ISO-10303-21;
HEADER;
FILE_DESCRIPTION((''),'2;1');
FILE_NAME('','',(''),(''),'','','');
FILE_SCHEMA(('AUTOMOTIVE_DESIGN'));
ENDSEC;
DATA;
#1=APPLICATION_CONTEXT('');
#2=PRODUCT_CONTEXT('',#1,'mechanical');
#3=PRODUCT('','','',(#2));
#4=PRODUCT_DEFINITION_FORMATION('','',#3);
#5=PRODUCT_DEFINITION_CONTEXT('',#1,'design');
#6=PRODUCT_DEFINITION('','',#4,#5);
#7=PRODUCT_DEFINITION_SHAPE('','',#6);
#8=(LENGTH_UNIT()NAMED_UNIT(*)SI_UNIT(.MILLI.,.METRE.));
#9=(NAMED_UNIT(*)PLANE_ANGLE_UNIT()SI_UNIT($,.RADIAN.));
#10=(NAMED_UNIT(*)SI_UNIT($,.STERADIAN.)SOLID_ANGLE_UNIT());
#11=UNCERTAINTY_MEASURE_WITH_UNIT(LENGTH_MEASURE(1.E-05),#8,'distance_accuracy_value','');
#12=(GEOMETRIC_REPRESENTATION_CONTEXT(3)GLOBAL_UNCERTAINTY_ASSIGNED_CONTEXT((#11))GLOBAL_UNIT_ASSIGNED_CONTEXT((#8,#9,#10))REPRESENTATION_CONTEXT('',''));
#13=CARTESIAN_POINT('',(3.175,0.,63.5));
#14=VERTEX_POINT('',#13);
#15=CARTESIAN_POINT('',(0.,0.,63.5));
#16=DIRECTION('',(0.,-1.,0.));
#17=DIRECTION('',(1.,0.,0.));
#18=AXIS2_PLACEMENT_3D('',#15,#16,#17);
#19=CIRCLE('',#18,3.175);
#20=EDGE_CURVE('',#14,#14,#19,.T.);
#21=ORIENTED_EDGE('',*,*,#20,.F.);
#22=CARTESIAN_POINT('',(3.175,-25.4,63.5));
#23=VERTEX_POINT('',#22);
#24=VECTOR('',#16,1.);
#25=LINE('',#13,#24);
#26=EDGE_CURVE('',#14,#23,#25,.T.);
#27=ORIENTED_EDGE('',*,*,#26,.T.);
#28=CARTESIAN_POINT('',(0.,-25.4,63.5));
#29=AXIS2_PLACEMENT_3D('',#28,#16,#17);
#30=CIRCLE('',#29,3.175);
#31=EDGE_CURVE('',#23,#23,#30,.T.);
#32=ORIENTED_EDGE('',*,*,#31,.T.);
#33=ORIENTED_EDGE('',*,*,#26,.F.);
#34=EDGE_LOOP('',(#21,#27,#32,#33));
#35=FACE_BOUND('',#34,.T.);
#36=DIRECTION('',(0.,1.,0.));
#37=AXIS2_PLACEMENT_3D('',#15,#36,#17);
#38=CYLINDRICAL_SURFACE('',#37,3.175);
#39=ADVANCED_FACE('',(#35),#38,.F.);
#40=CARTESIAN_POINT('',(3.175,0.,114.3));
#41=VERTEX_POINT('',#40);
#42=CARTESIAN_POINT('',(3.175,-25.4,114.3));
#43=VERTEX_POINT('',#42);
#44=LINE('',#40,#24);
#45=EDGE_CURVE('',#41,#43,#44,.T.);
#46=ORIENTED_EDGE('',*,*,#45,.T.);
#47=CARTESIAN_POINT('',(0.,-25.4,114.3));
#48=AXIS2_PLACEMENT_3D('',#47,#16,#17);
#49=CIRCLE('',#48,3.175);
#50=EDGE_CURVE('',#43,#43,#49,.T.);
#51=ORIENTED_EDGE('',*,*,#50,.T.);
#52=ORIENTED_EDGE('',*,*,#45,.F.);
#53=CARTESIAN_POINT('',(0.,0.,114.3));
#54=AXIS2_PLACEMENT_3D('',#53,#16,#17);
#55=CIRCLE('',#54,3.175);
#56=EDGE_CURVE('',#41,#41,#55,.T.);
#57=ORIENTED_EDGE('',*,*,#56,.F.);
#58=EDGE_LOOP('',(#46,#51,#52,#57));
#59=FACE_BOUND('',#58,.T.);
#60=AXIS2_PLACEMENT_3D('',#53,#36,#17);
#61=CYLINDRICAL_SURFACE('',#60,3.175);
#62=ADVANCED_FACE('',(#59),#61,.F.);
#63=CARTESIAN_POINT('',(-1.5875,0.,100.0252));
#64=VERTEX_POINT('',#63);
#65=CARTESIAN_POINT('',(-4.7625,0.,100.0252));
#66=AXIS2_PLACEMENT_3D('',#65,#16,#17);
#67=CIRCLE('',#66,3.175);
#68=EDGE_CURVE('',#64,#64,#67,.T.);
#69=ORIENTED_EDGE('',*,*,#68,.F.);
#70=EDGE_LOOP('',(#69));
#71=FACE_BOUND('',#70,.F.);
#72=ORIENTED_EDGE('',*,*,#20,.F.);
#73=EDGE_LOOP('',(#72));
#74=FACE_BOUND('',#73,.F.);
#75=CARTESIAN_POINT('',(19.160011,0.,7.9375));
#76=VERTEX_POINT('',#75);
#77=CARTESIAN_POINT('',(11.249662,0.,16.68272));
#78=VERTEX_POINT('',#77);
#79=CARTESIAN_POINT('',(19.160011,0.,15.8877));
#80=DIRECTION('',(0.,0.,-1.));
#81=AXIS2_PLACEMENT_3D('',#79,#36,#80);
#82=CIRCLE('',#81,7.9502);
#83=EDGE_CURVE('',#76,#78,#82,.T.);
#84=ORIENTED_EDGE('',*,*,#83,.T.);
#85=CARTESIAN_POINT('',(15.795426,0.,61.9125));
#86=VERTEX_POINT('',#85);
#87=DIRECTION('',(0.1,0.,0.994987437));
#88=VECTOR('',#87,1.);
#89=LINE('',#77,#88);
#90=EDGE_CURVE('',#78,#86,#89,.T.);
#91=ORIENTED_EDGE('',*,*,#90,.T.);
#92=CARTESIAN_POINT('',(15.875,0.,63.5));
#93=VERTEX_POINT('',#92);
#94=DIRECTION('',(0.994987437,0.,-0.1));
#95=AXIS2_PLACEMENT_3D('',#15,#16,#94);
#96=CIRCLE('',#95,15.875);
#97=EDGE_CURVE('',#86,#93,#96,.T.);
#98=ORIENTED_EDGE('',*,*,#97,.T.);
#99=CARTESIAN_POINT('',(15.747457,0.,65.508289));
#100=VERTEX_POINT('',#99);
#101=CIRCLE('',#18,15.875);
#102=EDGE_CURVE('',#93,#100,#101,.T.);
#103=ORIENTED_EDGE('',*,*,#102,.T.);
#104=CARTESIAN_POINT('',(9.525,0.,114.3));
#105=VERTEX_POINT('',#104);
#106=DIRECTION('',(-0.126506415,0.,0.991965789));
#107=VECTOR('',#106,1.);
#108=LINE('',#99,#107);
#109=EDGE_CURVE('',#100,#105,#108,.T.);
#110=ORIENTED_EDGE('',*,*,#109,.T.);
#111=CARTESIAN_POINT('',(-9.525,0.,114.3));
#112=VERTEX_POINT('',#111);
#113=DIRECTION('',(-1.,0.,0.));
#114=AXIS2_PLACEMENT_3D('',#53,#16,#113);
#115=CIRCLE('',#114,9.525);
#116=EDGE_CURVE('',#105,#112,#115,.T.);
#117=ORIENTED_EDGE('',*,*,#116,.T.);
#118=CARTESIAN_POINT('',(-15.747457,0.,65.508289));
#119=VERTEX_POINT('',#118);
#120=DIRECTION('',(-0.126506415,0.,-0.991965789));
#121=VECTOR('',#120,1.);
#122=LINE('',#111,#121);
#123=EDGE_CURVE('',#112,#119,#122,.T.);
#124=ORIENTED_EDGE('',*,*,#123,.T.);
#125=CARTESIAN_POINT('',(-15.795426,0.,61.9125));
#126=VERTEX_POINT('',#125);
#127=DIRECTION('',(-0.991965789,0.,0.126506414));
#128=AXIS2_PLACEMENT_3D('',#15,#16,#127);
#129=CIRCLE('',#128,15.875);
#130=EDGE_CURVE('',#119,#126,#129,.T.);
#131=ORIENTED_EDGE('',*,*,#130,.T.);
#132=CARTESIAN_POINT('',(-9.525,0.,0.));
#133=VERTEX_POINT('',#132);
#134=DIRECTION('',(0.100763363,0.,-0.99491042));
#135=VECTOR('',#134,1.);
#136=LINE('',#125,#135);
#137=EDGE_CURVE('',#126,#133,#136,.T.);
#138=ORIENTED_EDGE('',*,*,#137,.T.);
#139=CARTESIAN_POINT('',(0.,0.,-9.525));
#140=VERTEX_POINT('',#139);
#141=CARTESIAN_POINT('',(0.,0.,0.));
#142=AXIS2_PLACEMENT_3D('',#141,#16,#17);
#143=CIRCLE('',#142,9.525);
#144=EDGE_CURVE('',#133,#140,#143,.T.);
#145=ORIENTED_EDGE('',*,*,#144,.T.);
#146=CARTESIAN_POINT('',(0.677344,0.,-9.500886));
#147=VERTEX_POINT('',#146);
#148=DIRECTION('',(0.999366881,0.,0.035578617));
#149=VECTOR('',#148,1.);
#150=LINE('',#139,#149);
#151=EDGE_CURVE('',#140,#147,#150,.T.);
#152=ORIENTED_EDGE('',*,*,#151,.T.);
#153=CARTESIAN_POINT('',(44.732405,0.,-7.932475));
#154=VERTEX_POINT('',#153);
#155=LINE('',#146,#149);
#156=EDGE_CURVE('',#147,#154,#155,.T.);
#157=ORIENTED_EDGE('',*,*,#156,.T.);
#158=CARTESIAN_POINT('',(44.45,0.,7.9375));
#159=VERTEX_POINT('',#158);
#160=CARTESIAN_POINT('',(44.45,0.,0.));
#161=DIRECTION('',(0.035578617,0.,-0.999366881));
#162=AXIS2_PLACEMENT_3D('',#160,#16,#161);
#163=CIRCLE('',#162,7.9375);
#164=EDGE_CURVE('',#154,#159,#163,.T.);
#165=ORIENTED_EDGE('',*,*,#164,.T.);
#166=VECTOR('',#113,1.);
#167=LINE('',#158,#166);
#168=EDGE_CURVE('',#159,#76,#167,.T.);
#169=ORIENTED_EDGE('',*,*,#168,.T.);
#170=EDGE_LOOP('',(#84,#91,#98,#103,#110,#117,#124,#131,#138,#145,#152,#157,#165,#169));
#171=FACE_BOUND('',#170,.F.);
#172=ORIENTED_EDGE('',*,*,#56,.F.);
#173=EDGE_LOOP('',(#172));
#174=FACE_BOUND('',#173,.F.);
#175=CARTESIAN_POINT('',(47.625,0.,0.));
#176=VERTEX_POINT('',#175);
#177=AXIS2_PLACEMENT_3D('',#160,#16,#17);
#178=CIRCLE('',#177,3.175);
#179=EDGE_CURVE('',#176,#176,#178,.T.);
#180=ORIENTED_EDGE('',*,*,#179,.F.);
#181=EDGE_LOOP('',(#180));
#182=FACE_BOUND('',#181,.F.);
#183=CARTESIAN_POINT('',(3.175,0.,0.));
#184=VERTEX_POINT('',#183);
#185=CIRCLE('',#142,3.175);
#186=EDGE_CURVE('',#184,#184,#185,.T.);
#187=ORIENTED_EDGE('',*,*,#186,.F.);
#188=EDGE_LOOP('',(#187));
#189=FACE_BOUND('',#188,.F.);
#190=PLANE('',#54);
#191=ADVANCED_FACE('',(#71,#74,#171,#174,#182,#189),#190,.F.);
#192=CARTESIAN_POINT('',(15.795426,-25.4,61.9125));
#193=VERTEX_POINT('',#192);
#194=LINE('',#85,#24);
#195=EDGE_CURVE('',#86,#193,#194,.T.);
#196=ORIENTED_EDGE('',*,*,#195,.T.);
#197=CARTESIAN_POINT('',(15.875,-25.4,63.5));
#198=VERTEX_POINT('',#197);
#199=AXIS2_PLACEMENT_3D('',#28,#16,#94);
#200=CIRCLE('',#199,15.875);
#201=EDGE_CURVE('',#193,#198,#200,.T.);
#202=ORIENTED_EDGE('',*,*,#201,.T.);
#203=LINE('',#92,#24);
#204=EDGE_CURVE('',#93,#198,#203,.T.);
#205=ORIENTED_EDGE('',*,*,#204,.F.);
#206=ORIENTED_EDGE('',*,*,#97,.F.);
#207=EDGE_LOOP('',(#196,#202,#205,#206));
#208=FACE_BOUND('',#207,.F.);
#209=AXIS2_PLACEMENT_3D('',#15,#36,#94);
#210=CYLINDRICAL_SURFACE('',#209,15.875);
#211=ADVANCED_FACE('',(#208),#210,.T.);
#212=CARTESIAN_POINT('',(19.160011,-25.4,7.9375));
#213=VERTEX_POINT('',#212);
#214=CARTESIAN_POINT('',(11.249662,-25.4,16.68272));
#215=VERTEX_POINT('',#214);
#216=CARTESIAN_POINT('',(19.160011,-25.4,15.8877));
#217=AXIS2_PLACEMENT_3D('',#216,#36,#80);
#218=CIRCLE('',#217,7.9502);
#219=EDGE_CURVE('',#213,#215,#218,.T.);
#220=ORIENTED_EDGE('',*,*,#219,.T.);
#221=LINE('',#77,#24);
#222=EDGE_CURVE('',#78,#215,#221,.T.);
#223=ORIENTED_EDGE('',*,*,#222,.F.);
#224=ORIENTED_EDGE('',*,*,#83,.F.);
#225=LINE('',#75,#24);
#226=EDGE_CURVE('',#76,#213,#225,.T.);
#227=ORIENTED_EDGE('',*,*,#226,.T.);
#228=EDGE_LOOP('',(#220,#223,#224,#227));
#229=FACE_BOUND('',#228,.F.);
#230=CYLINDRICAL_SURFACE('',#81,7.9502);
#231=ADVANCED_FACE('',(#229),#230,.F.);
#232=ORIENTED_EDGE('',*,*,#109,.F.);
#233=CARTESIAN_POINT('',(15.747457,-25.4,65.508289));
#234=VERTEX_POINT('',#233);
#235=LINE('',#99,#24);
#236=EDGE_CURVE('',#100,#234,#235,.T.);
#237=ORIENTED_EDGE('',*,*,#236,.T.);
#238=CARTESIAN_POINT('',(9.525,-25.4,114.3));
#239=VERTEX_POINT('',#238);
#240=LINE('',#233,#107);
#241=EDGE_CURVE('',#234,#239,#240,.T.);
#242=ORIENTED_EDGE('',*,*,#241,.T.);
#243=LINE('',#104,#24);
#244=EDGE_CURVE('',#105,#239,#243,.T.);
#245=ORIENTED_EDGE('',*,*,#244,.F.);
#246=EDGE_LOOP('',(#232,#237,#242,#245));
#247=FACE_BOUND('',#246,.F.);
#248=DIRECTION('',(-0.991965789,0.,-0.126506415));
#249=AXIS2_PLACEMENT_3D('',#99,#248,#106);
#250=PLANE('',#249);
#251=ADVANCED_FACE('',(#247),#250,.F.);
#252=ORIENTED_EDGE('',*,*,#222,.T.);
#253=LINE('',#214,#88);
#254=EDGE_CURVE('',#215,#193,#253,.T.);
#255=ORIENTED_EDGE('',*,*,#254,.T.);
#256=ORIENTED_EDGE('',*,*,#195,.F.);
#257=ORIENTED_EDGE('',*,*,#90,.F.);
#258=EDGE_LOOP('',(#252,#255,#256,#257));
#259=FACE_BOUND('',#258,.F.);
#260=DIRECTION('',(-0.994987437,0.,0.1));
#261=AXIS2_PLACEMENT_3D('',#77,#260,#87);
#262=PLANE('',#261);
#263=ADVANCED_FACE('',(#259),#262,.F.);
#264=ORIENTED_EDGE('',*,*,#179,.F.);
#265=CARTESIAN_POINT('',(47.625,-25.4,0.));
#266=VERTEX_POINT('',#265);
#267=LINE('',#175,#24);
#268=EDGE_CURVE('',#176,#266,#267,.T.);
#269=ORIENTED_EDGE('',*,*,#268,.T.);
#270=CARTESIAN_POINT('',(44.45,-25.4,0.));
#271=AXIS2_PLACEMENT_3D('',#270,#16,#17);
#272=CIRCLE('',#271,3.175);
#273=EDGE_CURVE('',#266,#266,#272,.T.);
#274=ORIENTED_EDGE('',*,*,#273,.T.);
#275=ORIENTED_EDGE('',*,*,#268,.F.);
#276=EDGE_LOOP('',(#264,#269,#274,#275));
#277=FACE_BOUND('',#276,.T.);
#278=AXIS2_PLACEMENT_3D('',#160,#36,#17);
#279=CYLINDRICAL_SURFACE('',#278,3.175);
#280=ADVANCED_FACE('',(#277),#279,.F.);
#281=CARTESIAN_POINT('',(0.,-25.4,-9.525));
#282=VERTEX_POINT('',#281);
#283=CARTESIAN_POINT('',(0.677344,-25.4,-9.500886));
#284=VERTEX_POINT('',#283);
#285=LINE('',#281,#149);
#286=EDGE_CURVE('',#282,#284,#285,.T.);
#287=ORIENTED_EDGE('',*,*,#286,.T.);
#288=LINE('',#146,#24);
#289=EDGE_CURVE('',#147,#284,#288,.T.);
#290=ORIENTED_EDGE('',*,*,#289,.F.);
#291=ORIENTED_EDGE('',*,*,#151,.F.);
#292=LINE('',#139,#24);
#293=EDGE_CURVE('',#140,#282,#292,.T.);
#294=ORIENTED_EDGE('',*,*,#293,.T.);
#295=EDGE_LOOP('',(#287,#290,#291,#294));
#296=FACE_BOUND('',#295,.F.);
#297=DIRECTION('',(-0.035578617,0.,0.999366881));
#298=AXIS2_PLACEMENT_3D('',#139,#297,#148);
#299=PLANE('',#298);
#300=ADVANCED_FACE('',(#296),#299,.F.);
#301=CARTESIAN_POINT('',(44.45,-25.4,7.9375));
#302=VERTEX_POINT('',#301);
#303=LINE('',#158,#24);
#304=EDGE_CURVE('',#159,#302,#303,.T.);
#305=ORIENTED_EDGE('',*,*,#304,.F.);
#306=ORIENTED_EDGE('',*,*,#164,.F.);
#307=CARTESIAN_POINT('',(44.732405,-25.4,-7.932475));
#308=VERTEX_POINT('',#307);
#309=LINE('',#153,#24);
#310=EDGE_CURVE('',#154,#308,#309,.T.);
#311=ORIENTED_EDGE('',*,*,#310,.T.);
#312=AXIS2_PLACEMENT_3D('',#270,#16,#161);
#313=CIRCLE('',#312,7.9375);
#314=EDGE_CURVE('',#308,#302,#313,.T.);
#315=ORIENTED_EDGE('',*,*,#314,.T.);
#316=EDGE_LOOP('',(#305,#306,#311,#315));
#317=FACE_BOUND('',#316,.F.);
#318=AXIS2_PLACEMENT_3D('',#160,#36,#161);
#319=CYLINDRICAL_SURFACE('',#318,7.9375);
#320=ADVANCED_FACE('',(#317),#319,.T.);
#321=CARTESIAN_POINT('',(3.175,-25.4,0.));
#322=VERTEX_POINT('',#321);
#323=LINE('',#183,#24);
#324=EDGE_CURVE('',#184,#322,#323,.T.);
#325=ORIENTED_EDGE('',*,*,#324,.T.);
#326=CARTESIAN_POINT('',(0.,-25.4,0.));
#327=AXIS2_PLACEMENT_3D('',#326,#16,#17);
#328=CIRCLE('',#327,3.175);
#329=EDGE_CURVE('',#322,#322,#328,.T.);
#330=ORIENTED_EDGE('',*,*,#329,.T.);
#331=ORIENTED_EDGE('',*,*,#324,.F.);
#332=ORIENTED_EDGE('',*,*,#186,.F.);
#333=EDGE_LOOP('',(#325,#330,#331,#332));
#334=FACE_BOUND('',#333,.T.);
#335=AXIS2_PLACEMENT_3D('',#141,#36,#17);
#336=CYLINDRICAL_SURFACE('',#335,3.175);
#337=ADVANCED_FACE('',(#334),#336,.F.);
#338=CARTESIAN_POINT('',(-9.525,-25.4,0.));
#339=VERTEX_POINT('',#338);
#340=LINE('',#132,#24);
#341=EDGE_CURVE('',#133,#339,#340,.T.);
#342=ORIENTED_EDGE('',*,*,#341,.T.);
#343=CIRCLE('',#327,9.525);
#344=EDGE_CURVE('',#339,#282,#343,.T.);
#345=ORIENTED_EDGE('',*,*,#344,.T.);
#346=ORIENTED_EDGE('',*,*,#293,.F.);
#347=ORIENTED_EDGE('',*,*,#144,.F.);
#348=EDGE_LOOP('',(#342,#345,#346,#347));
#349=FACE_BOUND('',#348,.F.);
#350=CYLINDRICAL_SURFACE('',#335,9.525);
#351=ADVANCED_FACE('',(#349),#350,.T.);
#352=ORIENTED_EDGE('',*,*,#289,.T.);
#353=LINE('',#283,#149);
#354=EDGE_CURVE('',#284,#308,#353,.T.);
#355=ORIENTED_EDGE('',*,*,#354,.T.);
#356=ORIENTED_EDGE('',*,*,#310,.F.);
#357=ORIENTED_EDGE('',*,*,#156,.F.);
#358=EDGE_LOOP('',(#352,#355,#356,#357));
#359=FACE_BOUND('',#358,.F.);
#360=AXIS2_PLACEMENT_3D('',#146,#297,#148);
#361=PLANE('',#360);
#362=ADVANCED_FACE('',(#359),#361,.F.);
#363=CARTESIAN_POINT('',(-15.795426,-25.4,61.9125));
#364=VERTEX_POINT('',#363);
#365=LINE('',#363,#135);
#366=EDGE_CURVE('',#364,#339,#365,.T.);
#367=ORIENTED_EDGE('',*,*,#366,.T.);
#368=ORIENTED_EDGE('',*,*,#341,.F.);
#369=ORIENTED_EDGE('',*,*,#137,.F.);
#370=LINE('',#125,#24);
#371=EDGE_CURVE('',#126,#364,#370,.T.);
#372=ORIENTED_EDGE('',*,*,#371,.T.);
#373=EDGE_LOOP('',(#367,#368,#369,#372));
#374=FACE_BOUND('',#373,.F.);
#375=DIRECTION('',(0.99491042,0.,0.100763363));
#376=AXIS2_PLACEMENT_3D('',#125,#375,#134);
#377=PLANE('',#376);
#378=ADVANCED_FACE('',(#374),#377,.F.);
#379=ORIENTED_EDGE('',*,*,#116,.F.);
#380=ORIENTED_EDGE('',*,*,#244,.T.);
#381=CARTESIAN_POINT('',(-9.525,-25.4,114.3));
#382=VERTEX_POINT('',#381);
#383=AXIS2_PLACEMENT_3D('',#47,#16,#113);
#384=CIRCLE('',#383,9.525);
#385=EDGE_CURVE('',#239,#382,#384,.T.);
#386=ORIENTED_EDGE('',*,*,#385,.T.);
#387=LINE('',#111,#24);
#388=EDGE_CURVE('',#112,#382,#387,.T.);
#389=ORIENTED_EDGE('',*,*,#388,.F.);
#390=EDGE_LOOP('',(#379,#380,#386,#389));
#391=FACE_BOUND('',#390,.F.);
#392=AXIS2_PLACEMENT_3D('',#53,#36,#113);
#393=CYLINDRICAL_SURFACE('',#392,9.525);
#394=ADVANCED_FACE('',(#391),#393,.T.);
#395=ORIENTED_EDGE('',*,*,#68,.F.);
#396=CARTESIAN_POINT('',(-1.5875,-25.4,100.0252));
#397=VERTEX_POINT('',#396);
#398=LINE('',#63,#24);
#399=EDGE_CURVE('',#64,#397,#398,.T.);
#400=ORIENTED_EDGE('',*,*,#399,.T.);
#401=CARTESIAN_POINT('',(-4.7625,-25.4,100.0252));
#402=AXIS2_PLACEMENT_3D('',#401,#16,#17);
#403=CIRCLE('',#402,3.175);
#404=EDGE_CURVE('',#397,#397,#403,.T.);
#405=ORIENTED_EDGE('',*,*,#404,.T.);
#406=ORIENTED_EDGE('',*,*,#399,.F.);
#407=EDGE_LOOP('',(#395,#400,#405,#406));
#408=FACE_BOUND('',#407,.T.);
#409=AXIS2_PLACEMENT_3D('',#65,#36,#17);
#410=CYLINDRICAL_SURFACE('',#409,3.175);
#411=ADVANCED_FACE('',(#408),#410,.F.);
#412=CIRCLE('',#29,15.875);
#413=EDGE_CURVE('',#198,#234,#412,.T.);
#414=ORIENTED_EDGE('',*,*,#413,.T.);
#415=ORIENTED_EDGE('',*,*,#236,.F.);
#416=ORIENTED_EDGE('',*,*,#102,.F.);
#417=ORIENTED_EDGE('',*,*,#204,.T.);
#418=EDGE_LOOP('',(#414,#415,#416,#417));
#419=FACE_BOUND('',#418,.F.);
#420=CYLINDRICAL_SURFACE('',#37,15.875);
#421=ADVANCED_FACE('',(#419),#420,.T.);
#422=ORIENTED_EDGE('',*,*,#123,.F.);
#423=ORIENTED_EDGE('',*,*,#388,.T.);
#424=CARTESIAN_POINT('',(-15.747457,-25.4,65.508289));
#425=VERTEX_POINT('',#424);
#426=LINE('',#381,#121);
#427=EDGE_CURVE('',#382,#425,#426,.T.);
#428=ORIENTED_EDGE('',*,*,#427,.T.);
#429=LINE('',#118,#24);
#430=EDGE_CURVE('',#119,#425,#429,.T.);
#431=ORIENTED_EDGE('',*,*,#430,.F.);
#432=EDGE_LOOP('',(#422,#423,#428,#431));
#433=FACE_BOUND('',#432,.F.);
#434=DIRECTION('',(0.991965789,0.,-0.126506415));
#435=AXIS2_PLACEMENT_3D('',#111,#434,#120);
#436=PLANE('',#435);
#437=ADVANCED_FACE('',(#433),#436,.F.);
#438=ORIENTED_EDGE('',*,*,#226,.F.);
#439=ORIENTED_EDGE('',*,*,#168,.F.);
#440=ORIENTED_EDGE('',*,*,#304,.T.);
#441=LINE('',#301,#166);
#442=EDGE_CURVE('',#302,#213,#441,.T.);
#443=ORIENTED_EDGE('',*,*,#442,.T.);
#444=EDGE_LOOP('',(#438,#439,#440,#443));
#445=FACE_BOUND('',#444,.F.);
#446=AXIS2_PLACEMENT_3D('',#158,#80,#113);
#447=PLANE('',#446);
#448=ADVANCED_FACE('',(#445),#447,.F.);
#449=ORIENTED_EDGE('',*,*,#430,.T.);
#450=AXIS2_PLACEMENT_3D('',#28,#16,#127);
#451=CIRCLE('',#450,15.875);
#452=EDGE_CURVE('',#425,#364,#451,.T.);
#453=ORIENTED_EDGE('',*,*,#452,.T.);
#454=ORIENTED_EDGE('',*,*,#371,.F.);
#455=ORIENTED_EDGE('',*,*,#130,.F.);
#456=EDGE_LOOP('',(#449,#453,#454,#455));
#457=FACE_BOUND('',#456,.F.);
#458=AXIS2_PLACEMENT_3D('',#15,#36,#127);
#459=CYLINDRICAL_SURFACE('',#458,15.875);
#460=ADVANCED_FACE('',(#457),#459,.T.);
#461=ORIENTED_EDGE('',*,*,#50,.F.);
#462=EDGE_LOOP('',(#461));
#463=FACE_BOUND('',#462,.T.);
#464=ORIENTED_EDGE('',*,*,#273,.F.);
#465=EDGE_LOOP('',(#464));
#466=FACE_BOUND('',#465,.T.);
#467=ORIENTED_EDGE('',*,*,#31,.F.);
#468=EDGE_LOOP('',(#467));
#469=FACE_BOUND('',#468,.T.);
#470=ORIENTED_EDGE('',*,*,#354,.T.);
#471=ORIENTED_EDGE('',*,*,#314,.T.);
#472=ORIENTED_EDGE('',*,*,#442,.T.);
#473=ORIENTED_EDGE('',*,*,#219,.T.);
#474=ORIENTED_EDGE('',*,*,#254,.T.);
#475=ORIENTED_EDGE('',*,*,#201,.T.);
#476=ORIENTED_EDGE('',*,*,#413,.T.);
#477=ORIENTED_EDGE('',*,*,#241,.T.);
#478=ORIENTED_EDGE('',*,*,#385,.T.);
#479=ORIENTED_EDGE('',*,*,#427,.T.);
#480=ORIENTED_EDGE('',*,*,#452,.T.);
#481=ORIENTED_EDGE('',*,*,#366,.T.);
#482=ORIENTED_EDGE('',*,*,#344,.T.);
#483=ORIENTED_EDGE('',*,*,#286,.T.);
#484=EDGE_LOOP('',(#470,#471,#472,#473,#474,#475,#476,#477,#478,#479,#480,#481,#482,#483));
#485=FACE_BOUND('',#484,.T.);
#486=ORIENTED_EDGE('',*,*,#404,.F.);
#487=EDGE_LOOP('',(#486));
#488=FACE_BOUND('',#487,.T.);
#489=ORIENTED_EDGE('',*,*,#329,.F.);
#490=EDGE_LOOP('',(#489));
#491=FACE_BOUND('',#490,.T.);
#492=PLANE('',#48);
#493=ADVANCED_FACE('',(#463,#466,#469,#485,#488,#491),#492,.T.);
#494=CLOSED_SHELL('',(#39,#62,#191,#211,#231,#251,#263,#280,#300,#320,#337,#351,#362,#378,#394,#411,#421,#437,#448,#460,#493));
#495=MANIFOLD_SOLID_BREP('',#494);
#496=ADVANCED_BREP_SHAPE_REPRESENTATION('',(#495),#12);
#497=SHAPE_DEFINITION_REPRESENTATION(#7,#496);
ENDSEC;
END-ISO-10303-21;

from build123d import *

# Parameters (mm, degrees)
F0_R     = 3.175
F1_DEPTH = 25.4


# Not quite as in the source:
# - ends of sketch curves that miss each other by under 0.0002 mm in the source are joined


with BuildPart() as f1:
    # F0 (on Front) → F1 (new body)
    with BuildSketch(Plane.XZ):
        with BuildLine():
            ThreePointArc((9.525, 114.3), (0, 123.825), (-9.525, 114.3))
            ThreePointArc((-9.525, 114.3), (0, 104.775), (9.525, 114.3))
        make_face()
        with Locations((0, 114.3)):
            Circle(F0_R, mode=Mode.SUBTRACT)
        with BuildLine():
            Line((-9.525, 114.3), (-15.7474569047, 65.5082893304))
            ThreePointArc((-15.7474569047, 65.5082893304), (0, 79.375), (15.7474569047, 65.5082893304))
            Line((15.7474569047, 65.5082893304), (9.525, 114.3))
            ThreePointArc((9.525, 114.3), (0, 104.775), (-9.525, 114.3))
        make_face()
        with Locations((-4.7625, 100.0252)):
            Circle(F0_R, mode=Mode.SUBTRACT)
        with BuildLine():
            ThreePointArc((-9.525, 0), (0, 9.525), (9.525, 0))
            ThreePointArc((9.525, 0), (6.9705567315, -6.4912990883), (0.6773435479, -9.500885786))
            Line((0.6773435479, -9.500885786), (44.7324052746, -7.9324746146))
            ThreePointArc((44.7324052746, -7.9324746146), (36.5137564458, -0.1412249921), (44.45, 7.9375))
            Line((44.45, 7.9375), (19.160010759, 7.9375))
            ThreePointArc((19.160010759, 7.9375), (13.2639846378, 10.5545437096), (11.2496616365, 16.68272))
            Line((11.2496616365, 16.68272), (15.7954255641, 61.9125))
            ThreePointArc((15.7954255641, 61.9125), (15.8550939106, 62.7052534459), (15.875, 63.5))
            ThreePointArc((15.875, 63.5), (15.8430821396, 64.5061676396), (15.7474569047, 65.5082893304))
            ThreePointArc((15.7474569047, 65.5082893304), (0, 79.375), (-15.7474569047, 65.5082893304))
            ThreePointArc((-15.7474569047, 65.5082893304), (-15.8735876139, 63.7117575563), (-15.795425611, 61.9125004674))
            Line((-15.795425611, 61.9125004674), (-9.525, 0))
        make_face()
        with Locations((0, 63.5)):
            Circle(F0_R, mode=Mode.SUBTRACT)
        with BuildLine():
            ThreePointArc((0.6773435479, -9.500885786), (6.9705567315, -6.4912990883), (9.525, 0))
            ThreePointArc((9.525, 0), (0, 9.525), (-9.525, 0))
            ThreePointArc((-9.525, 0), (-6.7351920908, -6.7351920908), (0, -9.525))
            Line((0, -9.525), (0.6773435479, -9.500885786))
        make_face()
        Circle(F0_R, mode=Mode.SUBTRACT)
        with BuildLine():
            ThreePointArc((44.45, 7.9375), (36.5137564458, -0.1412249921), (44.7324052746, -7.9324746146))
            ThreePointArc((44.7324052746, -7.9324746146), (50.1616327839, -5.5119104847), (52.3875, 0))
            ThreePointArc((52.3875, 0), (50.0626600757, 5.6126600757), (44.45, 7.9375))
        make_face()
        with Locations((44.45, 0)):
            Circle(F0_R, mode=Mode.SUBTRACT)
    extrude(amount=F1_DEPTH)


solid = f1.part
